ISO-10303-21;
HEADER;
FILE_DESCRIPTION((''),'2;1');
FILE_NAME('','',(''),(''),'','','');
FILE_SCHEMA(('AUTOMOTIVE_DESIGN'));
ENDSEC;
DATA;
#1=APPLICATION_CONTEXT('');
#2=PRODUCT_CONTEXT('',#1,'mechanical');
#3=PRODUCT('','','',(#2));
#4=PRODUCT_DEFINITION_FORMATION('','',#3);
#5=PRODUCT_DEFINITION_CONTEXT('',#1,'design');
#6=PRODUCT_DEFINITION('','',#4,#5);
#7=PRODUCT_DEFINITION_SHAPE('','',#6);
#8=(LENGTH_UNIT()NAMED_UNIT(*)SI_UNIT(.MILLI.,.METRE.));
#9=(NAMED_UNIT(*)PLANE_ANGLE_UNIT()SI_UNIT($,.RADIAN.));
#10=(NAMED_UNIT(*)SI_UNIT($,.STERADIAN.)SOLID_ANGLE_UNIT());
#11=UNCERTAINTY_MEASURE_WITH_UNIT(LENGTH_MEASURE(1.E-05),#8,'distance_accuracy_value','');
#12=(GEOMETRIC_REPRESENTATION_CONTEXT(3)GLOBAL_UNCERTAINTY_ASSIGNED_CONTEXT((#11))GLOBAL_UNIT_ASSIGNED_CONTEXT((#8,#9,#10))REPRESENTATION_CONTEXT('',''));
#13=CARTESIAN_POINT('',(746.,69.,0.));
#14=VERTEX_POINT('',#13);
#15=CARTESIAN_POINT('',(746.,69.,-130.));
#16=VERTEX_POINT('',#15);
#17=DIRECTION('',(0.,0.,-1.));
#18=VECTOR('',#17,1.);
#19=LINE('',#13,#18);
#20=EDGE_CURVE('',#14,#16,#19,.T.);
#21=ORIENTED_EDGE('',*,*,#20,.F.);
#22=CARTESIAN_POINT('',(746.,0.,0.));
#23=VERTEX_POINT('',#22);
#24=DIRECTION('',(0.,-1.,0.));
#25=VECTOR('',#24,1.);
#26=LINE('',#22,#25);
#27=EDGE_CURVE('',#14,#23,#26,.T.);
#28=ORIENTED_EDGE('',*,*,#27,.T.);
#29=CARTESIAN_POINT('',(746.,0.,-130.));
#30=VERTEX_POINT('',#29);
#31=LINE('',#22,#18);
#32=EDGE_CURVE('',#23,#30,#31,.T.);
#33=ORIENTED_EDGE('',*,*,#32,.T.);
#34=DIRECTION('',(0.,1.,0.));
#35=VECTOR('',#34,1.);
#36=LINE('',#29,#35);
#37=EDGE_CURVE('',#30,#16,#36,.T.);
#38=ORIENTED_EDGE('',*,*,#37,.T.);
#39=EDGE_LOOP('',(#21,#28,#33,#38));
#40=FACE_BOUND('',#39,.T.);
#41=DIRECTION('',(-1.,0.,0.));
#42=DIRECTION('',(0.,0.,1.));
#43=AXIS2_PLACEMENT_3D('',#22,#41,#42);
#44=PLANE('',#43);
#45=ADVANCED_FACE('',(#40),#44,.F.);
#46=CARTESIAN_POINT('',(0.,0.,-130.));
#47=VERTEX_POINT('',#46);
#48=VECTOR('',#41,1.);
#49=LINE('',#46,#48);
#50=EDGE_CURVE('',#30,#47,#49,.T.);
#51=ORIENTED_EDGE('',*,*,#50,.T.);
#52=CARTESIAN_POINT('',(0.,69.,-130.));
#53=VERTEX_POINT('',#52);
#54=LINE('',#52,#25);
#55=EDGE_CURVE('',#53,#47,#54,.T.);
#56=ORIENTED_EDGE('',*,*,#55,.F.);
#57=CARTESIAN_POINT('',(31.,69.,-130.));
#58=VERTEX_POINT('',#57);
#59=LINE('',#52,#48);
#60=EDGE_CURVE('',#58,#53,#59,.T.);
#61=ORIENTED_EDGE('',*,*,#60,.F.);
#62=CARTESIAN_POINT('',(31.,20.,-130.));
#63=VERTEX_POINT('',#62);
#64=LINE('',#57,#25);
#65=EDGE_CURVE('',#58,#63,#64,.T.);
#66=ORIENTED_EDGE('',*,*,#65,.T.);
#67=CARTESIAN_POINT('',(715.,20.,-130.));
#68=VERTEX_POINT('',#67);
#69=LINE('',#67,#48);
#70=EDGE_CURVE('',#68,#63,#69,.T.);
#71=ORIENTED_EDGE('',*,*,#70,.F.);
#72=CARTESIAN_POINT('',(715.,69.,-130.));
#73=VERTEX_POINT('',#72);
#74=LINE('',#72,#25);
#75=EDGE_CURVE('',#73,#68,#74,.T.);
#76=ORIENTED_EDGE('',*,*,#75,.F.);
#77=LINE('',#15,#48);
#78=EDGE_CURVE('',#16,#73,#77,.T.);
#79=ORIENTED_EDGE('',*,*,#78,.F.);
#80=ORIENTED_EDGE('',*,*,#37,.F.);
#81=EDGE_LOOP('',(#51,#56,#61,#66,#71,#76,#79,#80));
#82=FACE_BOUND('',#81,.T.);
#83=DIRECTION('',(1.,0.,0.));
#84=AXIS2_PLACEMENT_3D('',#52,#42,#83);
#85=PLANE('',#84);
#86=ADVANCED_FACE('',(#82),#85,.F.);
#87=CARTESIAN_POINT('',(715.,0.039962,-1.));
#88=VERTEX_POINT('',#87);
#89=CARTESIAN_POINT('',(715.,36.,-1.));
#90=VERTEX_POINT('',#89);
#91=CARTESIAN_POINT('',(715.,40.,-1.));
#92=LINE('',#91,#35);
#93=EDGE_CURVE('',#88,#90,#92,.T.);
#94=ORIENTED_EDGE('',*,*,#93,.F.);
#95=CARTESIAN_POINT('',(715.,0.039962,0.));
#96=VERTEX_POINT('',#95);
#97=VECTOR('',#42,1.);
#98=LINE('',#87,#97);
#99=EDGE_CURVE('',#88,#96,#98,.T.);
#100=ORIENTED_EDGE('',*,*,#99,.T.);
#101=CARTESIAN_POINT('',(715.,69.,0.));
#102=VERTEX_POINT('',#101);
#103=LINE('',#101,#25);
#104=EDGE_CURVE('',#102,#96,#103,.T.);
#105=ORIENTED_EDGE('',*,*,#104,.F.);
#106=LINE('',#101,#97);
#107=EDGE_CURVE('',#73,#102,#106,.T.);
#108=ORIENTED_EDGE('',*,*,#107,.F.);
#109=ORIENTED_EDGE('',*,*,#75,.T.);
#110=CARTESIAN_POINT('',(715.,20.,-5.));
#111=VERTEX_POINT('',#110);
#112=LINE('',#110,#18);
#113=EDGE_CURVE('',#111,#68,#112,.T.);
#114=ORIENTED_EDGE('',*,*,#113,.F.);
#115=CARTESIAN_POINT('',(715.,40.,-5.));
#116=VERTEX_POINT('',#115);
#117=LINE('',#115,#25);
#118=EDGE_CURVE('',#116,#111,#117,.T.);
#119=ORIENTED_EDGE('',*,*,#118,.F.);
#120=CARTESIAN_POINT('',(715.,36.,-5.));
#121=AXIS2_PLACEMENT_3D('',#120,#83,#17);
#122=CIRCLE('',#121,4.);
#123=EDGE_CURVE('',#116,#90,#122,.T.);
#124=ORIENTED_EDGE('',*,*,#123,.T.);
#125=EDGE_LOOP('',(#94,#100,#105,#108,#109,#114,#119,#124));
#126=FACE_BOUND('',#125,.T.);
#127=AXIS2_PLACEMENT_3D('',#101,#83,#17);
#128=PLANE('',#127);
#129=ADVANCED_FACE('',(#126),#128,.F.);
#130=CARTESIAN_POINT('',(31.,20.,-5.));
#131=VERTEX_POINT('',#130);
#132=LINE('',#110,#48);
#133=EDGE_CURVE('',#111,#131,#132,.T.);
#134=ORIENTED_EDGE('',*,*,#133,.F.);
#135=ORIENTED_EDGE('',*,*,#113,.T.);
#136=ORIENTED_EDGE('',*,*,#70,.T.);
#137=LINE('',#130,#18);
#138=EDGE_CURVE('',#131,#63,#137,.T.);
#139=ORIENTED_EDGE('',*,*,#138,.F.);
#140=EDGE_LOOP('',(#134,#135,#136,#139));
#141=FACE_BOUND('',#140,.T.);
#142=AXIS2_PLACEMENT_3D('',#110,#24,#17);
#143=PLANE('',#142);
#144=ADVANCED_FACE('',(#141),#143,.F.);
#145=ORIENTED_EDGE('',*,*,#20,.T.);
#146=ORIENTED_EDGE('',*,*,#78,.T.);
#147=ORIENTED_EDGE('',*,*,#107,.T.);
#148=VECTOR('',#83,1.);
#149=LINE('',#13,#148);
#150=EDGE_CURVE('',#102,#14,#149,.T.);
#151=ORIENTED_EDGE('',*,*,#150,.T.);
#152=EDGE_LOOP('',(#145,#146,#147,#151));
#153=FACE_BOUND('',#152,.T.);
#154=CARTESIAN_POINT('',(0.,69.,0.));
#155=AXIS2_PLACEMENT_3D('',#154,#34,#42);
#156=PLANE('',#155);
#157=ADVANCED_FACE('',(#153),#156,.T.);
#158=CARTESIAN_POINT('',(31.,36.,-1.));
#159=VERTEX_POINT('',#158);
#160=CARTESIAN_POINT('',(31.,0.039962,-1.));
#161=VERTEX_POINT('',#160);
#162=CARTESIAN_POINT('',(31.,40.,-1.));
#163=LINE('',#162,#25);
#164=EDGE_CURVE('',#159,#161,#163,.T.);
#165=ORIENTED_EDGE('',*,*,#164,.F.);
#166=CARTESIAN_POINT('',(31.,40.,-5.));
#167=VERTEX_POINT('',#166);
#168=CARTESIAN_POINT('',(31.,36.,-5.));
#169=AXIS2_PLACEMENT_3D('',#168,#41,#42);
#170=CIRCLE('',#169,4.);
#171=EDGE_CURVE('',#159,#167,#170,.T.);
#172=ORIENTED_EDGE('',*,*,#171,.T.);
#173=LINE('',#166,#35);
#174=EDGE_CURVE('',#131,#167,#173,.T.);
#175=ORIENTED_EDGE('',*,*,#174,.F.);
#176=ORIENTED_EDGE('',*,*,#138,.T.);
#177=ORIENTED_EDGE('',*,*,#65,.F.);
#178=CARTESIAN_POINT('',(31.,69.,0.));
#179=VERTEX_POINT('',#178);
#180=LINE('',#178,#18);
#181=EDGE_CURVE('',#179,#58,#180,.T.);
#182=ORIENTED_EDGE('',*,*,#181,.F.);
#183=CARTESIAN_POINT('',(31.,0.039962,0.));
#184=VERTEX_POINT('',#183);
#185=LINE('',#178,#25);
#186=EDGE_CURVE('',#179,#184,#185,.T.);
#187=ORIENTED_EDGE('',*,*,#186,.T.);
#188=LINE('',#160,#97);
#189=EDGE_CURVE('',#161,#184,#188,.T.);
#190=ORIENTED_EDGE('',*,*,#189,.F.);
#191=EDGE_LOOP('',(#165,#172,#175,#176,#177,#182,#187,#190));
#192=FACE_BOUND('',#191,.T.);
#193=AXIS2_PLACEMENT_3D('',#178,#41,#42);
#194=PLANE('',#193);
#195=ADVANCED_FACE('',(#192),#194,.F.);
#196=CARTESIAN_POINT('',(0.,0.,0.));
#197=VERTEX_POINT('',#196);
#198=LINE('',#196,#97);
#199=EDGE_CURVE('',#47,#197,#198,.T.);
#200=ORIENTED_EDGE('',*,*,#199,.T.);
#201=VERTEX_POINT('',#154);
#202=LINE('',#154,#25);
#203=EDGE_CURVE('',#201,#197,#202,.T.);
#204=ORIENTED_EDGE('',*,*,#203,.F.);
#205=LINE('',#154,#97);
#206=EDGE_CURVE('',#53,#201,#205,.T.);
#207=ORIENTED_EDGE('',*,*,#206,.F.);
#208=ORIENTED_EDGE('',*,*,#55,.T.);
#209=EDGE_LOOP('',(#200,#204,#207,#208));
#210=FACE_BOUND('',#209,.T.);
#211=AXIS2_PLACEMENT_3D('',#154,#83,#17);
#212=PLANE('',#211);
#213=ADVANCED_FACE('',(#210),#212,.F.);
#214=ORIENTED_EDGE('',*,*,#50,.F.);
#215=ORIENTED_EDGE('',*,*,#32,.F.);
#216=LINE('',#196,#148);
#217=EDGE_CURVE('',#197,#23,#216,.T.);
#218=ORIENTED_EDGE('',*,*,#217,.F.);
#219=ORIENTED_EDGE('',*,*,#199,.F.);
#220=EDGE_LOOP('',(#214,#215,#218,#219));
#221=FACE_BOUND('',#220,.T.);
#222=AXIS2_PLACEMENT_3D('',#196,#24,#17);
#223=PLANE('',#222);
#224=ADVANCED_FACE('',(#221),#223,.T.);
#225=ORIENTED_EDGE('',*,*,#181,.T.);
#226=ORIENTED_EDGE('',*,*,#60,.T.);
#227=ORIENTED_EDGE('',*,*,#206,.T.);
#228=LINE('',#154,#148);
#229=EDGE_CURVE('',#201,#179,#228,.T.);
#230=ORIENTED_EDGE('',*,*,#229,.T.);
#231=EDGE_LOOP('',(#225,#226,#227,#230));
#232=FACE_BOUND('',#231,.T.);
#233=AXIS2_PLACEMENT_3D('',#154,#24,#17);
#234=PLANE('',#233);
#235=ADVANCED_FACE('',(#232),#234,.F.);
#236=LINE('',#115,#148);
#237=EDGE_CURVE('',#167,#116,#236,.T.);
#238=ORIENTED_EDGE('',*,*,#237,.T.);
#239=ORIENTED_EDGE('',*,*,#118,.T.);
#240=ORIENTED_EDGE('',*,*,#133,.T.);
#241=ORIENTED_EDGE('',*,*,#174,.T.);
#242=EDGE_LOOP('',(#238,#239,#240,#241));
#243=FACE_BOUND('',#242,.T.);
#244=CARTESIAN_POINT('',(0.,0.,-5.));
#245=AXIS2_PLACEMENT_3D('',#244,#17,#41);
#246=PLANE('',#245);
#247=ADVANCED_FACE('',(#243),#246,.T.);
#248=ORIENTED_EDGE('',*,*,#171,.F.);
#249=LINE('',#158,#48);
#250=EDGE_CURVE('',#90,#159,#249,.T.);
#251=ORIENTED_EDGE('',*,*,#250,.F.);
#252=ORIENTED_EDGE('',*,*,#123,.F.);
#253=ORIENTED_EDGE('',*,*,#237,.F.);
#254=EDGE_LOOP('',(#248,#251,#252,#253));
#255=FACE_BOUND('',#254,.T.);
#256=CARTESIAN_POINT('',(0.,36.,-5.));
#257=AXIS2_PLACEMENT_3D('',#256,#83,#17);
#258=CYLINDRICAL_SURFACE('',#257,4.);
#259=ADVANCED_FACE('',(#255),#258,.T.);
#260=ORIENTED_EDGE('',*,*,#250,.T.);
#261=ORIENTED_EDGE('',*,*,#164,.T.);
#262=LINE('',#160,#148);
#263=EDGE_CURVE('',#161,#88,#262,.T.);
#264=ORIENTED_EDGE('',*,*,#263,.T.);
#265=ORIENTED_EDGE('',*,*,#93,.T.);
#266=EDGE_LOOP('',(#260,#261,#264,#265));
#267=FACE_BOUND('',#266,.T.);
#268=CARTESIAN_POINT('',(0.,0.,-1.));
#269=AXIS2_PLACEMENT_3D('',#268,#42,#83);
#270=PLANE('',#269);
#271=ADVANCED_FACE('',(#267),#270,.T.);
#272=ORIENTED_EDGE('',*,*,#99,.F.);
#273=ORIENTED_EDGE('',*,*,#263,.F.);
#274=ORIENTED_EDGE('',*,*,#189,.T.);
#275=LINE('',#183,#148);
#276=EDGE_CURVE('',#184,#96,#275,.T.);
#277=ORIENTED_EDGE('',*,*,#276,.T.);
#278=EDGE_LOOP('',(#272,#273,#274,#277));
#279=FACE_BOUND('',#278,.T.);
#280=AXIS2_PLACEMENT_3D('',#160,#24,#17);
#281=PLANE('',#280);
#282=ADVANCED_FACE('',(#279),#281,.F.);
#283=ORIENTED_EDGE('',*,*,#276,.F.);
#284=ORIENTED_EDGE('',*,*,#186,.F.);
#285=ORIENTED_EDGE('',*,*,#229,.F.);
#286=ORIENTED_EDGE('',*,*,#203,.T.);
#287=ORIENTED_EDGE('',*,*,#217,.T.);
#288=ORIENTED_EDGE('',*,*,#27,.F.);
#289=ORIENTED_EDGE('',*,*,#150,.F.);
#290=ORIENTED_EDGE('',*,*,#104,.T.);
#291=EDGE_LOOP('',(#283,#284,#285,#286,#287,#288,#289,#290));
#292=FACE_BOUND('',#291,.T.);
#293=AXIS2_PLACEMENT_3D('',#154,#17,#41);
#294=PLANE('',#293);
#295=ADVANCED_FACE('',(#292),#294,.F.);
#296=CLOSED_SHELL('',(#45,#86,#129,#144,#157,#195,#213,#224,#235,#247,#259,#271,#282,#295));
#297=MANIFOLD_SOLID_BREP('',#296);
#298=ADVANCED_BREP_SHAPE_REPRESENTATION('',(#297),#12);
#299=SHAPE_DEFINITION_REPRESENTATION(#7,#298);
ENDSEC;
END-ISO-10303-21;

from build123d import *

# Parameters (mm, degrees)
CROQUIS2_W              = 31
CROQUIS2_H              = 130
SALIENTE_EXTRUIR1_DEPTH = 69
CROQUIS3_W              = 130
CROQUIS3_H              = 40
SALIENTE_EXTRUIR2_DEPTH = 715
CROQUIS4_W              = 31
CROQUIS4_H              = 130
SALIENTE_EXTRUIR3_DEPTH = 29
CROQUIS7_W              = 684
CROQUIS7_H              = 20
CORTAR_EXTRUIR2_DEPTH   = 125
CROQUIS8_W              = 684
CROQUIS8_H              = 39.960038326
CORTAR_EXTRUIR3_DEPTH   = 1
REDONDEO1_R             = 4


with BuildPart() as part:
    # Croquis2 → Saliente-Extruir1 (new body)
    with BuildSketch(Plane(origin=(0, 0, 0), x_dir=(1, 0, 0), z_dir=(0, 1, 0))):
        with Locations((15.5, 65)):
            Rectangle(CROQUIS2_W, CROQUIS2_H)
    extrude(amount=SALIENTE_EXTRUIR1_DEPTH)

    # Croquis3 → Saliente-Extruir2 (add)
    with BuildSketch(Plane(origin=(31, 0, 0), x_dir=(0, 0, -1), z_dir=(1, 0, 0))):
        with Locations((65, 20)):
            Rectangle(CROQUIS3_W, CROQUIS3_H)
    extrude(amount=SALIENTE_EXTRUIR2_DEPTH)

    # Croquis4 → Saliente-Extruir3 (add)
    with BuildSketch(Plane(origin=(0, 40, 0), x_dir=(1, 0, 0), z_dir=(0, 1, 0))):
        with Locations((730.5, 65)):
            Rectangle(CROQUIS4_W, CROQUIS4_H)
    extrude(amount=SALIENTE_EXTRUIR3_DEPTH)

    # Croquis7 → Cortar-Extruir2 (cut)
    with BuildSketch(Plane(origin=(0, 0, -130), x_dir=(-1, 0, 0), z_dir=(0, 0, -1))):
        with Locations((-373, 30)):
            Rectangle(CROQUIS7_W, CROQUIS7_H)
    extrude(amount=-CORTAR_EXTRUIR2_DEPTH, mode=Mode.SUBTRACT)

    # Croquis8 → Cortar-Extruir3 (cut)
    with BuildSketch(Plane.XY):
        with Locations((373, 20.019980837)):
            Rectangle(CROQUIS8_W, CROQUIS8_H)
    extrude(amount=-CORTAR_EXTRUIR3_DEPTH, mode=Mode.SUBTRACT)

    # Redondeo1
    redondeo1_edges = [part.edges().sort_by_distance(p)[0] for p in [
        (373, 40, -1),
    ]]
    fillet(redondeo1_edges, radius=REDONDEO1_R - 0.0001)  # a hair under: the kernel refuses the full size


solid = part.part
